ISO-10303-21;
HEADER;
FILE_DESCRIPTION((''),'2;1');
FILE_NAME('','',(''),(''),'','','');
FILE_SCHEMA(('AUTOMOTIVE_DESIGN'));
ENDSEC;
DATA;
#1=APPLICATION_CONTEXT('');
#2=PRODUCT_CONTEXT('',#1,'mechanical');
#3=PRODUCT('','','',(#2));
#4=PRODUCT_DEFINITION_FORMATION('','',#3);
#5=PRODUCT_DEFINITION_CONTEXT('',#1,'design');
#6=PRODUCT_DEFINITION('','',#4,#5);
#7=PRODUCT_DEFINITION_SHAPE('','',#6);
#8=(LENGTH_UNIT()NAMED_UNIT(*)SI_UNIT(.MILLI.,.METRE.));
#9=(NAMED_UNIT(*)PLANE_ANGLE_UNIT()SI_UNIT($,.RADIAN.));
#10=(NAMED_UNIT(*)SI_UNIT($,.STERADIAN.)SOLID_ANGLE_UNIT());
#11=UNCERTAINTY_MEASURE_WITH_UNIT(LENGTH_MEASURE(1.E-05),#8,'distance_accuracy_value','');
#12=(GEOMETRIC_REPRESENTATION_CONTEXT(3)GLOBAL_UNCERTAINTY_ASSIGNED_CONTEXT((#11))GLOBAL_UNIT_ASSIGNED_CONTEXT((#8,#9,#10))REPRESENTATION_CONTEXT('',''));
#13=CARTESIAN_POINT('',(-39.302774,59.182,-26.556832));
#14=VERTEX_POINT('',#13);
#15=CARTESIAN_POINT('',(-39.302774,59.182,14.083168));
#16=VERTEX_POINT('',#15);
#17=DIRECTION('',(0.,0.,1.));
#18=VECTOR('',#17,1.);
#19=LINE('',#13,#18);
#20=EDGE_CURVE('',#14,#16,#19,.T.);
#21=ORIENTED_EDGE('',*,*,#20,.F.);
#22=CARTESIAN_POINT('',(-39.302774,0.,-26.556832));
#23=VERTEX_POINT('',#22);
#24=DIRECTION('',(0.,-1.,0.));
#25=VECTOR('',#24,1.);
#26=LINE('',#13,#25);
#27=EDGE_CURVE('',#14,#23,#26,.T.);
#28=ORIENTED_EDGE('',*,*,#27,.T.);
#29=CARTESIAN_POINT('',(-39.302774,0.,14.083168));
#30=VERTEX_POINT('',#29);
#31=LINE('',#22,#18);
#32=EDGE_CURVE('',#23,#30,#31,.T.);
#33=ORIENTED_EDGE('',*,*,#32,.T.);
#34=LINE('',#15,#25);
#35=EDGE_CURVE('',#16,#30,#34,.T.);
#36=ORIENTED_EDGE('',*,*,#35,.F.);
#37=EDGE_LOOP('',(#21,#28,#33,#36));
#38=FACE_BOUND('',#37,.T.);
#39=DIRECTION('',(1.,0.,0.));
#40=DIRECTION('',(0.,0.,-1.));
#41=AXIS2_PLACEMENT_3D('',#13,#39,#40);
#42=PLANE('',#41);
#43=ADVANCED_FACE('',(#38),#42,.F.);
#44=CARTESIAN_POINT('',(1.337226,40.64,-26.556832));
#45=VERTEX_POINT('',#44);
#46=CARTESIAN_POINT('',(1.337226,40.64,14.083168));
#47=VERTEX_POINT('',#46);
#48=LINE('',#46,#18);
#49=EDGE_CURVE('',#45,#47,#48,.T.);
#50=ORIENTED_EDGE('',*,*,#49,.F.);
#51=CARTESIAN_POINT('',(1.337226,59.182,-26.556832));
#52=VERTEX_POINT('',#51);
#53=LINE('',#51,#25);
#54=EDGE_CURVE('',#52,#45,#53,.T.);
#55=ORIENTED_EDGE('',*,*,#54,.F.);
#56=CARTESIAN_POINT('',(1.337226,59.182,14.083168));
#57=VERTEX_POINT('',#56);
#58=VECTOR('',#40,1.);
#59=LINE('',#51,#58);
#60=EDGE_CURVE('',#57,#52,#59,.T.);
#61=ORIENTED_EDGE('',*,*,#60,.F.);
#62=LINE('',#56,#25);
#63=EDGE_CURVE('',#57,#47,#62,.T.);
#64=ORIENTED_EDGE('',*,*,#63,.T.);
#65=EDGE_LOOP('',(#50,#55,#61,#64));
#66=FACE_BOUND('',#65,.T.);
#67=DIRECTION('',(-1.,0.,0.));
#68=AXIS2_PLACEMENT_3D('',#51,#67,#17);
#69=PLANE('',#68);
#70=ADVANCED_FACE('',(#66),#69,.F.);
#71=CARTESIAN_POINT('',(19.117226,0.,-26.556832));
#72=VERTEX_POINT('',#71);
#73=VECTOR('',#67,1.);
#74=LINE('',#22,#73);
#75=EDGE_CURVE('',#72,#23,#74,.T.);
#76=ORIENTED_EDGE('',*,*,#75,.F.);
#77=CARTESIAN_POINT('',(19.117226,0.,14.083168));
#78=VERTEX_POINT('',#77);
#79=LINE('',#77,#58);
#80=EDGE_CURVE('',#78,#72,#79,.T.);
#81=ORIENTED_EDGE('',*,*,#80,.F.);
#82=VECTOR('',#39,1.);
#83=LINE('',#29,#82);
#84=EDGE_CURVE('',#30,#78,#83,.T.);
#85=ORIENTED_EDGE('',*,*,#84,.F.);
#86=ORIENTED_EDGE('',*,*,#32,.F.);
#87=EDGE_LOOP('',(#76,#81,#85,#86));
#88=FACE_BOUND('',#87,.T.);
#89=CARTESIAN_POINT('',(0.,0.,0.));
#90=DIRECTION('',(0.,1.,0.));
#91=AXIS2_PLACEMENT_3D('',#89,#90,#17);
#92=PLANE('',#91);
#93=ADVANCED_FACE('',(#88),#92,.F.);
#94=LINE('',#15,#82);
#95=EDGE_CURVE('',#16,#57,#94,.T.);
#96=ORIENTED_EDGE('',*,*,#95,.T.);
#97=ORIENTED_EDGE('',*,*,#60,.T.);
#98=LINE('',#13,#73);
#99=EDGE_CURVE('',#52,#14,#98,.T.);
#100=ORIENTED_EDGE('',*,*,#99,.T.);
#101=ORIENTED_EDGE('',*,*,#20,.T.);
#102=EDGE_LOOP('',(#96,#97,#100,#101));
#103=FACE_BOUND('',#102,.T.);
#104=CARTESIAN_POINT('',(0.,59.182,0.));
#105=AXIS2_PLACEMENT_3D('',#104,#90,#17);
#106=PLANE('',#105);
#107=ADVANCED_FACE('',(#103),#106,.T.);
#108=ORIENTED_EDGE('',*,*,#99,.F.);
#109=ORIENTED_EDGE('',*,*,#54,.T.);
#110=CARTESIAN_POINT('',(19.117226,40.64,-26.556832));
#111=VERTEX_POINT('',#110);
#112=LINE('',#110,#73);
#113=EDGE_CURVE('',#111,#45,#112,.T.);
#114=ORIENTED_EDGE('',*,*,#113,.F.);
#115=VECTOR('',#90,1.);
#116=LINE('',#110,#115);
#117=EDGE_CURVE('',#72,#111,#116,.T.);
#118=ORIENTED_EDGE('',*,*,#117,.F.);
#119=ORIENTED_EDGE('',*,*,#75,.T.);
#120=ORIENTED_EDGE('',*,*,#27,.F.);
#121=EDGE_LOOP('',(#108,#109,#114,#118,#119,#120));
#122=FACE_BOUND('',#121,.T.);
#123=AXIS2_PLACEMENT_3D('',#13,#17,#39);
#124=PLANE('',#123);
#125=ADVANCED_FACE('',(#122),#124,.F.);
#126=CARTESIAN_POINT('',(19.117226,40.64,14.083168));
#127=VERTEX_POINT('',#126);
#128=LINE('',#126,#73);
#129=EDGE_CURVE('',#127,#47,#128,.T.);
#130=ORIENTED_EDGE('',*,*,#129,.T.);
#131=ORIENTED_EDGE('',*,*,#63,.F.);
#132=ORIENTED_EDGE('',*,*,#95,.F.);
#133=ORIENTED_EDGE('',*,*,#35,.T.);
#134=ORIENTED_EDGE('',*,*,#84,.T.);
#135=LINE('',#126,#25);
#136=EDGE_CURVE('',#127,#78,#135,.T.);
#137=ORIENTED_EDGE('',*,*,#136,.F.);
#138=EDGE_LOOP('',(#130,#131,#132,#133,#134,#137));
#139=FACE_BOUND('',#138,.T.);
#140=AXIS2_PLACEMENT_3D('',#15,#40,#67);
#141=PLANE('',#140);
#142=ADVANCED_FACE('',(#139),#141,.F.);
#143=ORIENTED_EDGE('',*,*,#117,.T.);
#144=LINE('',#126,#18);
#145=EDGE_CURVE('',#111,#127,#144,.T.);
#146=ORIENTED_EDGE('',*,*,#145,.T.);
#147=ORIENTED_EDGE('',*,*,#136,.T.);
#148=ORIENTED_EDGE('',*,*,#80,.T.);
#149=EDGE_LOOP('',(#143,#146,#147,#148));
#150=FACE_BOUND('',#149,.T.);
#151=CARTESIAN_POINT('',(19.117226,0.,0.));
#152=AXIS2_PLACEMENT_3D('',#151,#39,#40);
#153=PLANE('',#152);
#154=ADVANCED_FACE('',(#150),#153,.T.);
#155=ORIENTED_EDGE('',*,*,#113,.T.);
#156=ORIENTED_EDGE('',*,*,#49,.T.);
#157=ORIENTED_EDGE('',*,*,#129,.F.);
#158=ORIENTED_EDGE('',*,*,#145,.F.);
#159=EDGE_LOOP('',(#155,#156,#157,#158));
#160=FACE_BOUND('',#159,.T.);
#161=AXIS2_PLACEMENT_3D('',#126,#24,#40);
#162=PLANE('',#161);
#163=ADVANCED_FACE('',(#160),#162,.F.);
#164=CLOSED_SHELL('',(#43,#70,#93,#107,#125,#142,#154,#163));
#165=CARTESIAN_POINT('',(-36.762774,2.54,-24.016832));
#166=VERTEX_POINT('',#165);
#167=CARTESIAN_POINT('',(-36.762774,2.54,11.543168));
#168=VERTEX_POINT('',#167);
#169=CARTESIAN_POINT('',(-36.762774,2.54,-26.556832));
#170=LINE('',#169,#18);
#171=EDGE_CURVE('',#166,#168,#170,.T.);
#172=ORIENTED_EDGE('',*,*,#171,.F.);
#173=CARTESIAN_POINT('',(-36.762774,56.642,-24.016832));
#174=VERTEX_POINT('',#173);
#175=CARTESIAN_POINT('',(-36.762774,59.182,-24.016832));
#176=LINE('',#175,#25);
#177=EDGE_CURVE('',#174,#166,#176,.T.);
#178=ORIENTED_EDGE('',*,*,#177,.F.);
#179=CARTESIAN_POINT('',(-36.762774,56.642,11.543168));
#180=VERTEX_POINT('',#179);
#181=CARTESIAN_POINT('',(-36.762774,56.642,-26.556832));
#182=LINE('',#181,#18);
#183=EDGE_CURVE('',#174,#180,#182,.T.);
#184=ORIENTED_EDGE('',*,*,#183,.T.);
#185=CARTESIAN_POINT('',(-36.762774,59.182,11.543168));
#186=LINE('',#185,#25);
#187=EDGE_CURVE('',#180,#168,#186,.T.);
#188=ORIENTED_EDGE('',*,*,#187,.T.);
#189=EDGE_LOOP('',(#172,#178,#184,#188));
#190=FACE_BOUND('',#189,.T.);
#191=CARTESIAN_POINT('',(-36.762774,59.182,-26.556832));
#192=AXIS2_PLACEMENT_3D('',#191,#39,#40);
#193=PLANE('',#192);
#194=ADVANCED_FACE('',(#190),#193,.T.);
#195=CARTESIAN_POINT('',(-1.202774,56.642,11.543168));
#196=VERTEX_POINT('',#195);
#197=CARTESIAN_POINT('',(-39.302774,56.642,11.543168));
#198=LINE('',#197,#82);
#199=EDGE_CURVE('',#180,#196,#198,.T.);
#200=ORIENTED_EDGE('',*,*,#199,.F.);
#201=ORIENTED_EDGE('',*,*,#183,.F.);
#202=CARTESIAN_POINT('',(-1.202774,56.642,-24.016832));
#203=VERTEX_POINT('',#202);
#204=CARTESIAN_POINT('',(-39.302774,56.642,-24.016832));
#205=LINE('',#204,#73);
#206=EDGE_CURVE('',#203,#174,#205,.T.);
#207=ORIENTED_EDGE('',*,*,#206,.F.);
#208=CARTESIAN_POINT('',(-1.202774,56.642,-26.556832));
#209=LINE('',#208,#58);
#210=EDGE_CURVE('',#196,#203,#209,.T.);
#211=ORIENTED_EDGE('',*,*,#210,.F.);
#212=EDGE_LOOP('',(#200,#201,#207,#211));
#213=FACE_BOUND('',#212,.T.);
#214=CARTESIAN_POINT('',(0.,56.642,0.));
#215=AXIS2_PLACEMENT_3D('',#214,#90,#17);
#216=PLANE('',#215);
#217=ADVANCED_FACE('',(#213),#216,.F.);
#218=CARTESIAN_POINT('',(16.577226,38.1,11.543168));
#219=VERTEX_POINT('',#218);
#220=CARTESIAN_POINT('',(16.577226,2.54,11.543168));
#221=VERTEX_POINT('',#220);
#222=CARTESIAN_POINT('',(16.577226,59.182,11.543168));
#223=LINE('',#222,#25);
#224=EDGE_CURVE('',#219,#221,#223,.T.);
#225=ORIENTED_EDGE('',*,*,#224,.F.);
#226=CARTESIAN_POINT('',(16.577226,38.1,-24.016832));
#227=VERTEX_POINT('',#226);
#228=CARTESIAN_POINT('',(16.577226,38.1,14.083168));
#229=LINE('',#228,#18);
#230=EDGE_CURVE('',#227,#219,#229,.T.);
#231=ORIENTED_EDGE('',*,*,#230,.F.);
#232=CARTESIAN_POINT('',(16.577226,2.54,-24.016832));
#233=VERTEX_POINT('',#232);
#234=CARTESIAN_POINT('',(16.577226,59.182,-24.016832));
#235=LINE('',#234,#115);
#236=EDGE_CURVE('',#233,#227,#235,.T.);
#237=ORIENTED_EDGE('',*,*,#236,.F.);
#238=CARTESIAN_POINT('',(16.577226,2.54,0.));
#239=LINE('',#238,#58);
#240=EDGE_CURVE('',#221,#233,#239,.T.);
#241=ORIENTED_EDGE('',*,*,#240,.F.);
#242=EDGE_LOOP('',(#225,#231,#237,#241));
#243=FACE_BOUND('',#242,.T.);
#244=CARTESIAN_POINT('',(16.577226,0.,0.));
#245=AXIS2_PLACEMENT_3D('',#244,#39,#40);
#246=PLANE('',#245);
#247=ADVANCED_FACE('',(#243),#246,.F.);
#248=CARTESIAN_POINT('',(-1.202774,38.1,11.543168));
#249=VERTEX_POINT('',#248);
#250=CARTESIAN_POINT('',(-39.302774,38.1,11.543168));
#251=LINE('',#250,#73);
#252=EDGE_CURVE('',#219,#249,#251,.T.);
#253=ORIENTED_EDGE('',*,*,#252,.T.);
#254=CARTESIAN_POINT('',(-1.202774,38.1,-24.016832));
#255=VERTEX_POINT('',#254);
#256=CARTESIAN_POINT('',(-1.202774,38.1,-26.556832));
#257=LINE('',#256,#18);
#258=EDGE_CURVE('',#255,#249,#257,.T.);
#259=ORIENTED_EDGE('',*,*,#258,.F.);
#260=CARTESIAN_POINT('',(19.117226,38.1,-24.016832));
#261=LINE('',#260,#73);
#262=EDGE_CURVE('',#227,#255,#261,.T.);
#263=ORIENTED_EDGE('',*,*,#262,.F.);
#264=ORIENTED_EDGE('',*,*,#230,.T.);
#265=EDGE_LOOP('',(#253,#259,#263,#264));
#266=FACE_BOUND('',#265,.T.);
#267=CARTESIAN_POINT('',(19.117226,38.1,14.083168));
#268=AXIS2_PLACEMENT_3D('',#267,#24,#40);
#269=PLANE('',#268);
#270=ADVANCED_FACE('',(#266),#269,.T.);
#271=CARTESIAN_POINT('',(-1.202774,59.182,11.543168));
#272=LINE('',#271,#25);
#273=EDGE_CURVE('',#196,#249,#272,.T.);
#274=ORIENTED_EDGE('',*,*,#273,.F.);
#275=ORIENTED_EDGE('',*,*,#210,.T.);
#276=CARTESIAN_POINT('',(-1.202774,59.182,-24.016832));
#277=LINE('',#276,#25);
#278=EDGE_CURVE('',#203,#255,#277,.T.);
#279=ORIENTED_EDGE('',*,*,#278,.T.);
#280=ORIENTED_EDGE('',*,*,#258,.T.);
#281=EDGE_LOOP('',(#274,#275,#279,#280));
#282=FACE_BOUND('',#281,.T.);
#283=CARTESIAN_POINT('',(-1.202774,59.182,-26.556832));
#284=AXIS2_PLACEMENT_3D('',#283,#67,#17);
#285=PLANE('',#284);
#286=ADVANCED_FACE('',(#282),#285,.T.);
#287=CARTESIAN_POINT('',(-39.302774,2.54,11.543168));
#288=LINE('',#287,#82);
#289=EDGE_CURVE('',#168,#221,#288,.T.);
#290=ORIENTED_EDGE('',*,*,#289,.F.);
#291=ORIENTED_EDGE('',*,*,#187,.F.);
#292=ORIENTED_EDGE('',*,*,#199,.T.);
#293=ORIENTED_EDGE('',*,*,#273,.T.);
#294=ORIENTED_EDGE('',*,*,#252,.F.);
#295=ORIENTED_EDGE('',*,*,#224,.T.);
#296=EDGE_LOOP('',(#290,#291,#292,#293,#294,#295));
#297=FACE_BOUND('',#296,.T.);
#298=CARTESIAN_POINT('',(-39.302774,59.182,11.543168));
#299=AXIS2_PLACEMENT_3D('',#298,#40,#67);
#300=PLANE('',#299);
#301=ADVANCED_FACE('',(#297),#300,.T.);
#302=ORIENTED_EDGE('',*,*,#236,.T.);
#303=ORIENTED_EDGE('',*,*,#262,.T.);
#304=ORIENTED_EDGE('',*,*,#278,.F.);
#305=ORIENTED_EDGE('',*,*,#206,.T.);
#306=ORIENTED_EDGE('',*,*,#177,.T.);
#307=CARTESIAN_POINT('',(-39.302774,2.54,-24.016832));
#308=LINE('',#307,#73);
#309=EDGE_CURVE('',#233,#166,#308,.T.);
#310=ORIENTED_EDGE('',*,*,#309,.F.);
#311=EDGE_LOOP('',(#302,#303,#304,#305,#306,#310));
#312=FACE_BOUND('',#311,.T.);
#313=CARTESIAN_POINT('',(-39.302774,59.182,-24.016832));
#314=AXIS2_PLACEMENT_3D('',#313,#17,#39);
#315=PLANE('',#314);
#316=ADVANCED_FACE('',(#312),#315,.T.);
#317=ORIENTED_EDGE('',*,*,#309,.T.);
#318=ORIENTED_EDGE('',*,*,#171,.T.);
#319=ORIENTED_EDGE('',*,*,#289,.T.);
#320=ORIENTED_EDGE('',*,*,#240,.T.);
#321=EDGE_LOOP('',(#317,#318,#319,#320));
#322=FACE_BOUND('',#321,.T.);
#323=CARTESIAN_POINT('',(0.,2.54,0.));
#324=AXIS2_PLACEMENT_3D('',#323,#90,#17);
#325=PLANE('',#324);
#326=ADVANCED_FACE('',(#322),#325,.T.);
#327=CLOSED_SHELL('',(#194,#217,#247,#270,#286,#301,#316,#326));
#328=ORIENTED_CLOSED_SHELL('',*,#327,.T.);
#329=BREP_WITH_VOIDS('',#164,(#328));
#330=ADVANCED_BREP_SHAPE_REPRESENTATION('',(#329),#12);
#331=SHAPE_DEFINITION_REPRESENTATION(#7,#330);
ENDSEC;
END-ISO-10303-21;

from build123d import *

# Parameters (mm, degrees)
SKETCH1_W           = 40.64
SKETCH1_H           = 40.64
BOSS_EXTRUDE1_DEPTH = 59.182
SKETCH2_W           = 40.64
SKETCH2_H           = 40.64
BOSS_EXTRUDE2_DEPTH = 17.78
SHELL1_START        = -36.762774376
SHELL1_OUTLINE_W    = 54.102
SHELL1_OUTLINE_H    = 35.56
SHELL1_DEPTH        = 35.56
SHELL1_START_2      = -1.202774376
SHELL1_2_OUTLINE_W  = 35.56
SHELL1_2_OUTLINE_H  = 35.56
SHELL1_2_DEPTH      = 17.78


# Read off the part's stored shape, not the designer's step: Shell1
with BuildPart() as part:
    # Sketch1 → Boss-Extrude1 (new body)
    with BuildSketch(Plane(origin=(0, 0, 0), x_dir=(1, 0, 0), z_dir=(0, 1, 0))):
        with Locations((-18.982774376, 6.236831683)):
            Rectangle(SKETCH1_W, SKETCH1_H)
    extrude(amount=BOSS_EXTRUDE1_DEPTH)

    # Sketch2 → Boss-Extrude2 (add)
    with BuildSketch(Plane(origin=(1.337225624, 0, 0), x_dir=(0, 0, -1), z_dir=(1, 0, 0))):
        with Locations((6.236831683, 20.32)):
            Rectangle(SKETCH2_W, SKETCH2_H)
    extrude(amount=BOSS_EXTRUDE2_DEPTH)

    # Shell1 outline → Shell1 (cut)
    with BuildSketch(Plane.YZ.offset(SHELL1_START)):
        with Locations((29.591, -6.236831683)):
            Rectangle(SHELL1_OUTLINE_W, SHELL1_OUTLINE_H)
    extrude(amount=SHELL1_DEPTH, mode=Mode.SUBTRACT)

    # Shell1 2 outline → Shell1 2 (cut)
    with BuildSketch(Plane.YZ.offset(SHELL1_START_2)):
        with Locations((20.32, -6.236831683)):
            Rectangle(SHELL1_2_OUTLINE_W, SHELL1_2_OUTLINE_H)
    extrude(amount=SHELL1_2_DEPTH, mode=Mode.SUBTRACT)


solid = part.part
